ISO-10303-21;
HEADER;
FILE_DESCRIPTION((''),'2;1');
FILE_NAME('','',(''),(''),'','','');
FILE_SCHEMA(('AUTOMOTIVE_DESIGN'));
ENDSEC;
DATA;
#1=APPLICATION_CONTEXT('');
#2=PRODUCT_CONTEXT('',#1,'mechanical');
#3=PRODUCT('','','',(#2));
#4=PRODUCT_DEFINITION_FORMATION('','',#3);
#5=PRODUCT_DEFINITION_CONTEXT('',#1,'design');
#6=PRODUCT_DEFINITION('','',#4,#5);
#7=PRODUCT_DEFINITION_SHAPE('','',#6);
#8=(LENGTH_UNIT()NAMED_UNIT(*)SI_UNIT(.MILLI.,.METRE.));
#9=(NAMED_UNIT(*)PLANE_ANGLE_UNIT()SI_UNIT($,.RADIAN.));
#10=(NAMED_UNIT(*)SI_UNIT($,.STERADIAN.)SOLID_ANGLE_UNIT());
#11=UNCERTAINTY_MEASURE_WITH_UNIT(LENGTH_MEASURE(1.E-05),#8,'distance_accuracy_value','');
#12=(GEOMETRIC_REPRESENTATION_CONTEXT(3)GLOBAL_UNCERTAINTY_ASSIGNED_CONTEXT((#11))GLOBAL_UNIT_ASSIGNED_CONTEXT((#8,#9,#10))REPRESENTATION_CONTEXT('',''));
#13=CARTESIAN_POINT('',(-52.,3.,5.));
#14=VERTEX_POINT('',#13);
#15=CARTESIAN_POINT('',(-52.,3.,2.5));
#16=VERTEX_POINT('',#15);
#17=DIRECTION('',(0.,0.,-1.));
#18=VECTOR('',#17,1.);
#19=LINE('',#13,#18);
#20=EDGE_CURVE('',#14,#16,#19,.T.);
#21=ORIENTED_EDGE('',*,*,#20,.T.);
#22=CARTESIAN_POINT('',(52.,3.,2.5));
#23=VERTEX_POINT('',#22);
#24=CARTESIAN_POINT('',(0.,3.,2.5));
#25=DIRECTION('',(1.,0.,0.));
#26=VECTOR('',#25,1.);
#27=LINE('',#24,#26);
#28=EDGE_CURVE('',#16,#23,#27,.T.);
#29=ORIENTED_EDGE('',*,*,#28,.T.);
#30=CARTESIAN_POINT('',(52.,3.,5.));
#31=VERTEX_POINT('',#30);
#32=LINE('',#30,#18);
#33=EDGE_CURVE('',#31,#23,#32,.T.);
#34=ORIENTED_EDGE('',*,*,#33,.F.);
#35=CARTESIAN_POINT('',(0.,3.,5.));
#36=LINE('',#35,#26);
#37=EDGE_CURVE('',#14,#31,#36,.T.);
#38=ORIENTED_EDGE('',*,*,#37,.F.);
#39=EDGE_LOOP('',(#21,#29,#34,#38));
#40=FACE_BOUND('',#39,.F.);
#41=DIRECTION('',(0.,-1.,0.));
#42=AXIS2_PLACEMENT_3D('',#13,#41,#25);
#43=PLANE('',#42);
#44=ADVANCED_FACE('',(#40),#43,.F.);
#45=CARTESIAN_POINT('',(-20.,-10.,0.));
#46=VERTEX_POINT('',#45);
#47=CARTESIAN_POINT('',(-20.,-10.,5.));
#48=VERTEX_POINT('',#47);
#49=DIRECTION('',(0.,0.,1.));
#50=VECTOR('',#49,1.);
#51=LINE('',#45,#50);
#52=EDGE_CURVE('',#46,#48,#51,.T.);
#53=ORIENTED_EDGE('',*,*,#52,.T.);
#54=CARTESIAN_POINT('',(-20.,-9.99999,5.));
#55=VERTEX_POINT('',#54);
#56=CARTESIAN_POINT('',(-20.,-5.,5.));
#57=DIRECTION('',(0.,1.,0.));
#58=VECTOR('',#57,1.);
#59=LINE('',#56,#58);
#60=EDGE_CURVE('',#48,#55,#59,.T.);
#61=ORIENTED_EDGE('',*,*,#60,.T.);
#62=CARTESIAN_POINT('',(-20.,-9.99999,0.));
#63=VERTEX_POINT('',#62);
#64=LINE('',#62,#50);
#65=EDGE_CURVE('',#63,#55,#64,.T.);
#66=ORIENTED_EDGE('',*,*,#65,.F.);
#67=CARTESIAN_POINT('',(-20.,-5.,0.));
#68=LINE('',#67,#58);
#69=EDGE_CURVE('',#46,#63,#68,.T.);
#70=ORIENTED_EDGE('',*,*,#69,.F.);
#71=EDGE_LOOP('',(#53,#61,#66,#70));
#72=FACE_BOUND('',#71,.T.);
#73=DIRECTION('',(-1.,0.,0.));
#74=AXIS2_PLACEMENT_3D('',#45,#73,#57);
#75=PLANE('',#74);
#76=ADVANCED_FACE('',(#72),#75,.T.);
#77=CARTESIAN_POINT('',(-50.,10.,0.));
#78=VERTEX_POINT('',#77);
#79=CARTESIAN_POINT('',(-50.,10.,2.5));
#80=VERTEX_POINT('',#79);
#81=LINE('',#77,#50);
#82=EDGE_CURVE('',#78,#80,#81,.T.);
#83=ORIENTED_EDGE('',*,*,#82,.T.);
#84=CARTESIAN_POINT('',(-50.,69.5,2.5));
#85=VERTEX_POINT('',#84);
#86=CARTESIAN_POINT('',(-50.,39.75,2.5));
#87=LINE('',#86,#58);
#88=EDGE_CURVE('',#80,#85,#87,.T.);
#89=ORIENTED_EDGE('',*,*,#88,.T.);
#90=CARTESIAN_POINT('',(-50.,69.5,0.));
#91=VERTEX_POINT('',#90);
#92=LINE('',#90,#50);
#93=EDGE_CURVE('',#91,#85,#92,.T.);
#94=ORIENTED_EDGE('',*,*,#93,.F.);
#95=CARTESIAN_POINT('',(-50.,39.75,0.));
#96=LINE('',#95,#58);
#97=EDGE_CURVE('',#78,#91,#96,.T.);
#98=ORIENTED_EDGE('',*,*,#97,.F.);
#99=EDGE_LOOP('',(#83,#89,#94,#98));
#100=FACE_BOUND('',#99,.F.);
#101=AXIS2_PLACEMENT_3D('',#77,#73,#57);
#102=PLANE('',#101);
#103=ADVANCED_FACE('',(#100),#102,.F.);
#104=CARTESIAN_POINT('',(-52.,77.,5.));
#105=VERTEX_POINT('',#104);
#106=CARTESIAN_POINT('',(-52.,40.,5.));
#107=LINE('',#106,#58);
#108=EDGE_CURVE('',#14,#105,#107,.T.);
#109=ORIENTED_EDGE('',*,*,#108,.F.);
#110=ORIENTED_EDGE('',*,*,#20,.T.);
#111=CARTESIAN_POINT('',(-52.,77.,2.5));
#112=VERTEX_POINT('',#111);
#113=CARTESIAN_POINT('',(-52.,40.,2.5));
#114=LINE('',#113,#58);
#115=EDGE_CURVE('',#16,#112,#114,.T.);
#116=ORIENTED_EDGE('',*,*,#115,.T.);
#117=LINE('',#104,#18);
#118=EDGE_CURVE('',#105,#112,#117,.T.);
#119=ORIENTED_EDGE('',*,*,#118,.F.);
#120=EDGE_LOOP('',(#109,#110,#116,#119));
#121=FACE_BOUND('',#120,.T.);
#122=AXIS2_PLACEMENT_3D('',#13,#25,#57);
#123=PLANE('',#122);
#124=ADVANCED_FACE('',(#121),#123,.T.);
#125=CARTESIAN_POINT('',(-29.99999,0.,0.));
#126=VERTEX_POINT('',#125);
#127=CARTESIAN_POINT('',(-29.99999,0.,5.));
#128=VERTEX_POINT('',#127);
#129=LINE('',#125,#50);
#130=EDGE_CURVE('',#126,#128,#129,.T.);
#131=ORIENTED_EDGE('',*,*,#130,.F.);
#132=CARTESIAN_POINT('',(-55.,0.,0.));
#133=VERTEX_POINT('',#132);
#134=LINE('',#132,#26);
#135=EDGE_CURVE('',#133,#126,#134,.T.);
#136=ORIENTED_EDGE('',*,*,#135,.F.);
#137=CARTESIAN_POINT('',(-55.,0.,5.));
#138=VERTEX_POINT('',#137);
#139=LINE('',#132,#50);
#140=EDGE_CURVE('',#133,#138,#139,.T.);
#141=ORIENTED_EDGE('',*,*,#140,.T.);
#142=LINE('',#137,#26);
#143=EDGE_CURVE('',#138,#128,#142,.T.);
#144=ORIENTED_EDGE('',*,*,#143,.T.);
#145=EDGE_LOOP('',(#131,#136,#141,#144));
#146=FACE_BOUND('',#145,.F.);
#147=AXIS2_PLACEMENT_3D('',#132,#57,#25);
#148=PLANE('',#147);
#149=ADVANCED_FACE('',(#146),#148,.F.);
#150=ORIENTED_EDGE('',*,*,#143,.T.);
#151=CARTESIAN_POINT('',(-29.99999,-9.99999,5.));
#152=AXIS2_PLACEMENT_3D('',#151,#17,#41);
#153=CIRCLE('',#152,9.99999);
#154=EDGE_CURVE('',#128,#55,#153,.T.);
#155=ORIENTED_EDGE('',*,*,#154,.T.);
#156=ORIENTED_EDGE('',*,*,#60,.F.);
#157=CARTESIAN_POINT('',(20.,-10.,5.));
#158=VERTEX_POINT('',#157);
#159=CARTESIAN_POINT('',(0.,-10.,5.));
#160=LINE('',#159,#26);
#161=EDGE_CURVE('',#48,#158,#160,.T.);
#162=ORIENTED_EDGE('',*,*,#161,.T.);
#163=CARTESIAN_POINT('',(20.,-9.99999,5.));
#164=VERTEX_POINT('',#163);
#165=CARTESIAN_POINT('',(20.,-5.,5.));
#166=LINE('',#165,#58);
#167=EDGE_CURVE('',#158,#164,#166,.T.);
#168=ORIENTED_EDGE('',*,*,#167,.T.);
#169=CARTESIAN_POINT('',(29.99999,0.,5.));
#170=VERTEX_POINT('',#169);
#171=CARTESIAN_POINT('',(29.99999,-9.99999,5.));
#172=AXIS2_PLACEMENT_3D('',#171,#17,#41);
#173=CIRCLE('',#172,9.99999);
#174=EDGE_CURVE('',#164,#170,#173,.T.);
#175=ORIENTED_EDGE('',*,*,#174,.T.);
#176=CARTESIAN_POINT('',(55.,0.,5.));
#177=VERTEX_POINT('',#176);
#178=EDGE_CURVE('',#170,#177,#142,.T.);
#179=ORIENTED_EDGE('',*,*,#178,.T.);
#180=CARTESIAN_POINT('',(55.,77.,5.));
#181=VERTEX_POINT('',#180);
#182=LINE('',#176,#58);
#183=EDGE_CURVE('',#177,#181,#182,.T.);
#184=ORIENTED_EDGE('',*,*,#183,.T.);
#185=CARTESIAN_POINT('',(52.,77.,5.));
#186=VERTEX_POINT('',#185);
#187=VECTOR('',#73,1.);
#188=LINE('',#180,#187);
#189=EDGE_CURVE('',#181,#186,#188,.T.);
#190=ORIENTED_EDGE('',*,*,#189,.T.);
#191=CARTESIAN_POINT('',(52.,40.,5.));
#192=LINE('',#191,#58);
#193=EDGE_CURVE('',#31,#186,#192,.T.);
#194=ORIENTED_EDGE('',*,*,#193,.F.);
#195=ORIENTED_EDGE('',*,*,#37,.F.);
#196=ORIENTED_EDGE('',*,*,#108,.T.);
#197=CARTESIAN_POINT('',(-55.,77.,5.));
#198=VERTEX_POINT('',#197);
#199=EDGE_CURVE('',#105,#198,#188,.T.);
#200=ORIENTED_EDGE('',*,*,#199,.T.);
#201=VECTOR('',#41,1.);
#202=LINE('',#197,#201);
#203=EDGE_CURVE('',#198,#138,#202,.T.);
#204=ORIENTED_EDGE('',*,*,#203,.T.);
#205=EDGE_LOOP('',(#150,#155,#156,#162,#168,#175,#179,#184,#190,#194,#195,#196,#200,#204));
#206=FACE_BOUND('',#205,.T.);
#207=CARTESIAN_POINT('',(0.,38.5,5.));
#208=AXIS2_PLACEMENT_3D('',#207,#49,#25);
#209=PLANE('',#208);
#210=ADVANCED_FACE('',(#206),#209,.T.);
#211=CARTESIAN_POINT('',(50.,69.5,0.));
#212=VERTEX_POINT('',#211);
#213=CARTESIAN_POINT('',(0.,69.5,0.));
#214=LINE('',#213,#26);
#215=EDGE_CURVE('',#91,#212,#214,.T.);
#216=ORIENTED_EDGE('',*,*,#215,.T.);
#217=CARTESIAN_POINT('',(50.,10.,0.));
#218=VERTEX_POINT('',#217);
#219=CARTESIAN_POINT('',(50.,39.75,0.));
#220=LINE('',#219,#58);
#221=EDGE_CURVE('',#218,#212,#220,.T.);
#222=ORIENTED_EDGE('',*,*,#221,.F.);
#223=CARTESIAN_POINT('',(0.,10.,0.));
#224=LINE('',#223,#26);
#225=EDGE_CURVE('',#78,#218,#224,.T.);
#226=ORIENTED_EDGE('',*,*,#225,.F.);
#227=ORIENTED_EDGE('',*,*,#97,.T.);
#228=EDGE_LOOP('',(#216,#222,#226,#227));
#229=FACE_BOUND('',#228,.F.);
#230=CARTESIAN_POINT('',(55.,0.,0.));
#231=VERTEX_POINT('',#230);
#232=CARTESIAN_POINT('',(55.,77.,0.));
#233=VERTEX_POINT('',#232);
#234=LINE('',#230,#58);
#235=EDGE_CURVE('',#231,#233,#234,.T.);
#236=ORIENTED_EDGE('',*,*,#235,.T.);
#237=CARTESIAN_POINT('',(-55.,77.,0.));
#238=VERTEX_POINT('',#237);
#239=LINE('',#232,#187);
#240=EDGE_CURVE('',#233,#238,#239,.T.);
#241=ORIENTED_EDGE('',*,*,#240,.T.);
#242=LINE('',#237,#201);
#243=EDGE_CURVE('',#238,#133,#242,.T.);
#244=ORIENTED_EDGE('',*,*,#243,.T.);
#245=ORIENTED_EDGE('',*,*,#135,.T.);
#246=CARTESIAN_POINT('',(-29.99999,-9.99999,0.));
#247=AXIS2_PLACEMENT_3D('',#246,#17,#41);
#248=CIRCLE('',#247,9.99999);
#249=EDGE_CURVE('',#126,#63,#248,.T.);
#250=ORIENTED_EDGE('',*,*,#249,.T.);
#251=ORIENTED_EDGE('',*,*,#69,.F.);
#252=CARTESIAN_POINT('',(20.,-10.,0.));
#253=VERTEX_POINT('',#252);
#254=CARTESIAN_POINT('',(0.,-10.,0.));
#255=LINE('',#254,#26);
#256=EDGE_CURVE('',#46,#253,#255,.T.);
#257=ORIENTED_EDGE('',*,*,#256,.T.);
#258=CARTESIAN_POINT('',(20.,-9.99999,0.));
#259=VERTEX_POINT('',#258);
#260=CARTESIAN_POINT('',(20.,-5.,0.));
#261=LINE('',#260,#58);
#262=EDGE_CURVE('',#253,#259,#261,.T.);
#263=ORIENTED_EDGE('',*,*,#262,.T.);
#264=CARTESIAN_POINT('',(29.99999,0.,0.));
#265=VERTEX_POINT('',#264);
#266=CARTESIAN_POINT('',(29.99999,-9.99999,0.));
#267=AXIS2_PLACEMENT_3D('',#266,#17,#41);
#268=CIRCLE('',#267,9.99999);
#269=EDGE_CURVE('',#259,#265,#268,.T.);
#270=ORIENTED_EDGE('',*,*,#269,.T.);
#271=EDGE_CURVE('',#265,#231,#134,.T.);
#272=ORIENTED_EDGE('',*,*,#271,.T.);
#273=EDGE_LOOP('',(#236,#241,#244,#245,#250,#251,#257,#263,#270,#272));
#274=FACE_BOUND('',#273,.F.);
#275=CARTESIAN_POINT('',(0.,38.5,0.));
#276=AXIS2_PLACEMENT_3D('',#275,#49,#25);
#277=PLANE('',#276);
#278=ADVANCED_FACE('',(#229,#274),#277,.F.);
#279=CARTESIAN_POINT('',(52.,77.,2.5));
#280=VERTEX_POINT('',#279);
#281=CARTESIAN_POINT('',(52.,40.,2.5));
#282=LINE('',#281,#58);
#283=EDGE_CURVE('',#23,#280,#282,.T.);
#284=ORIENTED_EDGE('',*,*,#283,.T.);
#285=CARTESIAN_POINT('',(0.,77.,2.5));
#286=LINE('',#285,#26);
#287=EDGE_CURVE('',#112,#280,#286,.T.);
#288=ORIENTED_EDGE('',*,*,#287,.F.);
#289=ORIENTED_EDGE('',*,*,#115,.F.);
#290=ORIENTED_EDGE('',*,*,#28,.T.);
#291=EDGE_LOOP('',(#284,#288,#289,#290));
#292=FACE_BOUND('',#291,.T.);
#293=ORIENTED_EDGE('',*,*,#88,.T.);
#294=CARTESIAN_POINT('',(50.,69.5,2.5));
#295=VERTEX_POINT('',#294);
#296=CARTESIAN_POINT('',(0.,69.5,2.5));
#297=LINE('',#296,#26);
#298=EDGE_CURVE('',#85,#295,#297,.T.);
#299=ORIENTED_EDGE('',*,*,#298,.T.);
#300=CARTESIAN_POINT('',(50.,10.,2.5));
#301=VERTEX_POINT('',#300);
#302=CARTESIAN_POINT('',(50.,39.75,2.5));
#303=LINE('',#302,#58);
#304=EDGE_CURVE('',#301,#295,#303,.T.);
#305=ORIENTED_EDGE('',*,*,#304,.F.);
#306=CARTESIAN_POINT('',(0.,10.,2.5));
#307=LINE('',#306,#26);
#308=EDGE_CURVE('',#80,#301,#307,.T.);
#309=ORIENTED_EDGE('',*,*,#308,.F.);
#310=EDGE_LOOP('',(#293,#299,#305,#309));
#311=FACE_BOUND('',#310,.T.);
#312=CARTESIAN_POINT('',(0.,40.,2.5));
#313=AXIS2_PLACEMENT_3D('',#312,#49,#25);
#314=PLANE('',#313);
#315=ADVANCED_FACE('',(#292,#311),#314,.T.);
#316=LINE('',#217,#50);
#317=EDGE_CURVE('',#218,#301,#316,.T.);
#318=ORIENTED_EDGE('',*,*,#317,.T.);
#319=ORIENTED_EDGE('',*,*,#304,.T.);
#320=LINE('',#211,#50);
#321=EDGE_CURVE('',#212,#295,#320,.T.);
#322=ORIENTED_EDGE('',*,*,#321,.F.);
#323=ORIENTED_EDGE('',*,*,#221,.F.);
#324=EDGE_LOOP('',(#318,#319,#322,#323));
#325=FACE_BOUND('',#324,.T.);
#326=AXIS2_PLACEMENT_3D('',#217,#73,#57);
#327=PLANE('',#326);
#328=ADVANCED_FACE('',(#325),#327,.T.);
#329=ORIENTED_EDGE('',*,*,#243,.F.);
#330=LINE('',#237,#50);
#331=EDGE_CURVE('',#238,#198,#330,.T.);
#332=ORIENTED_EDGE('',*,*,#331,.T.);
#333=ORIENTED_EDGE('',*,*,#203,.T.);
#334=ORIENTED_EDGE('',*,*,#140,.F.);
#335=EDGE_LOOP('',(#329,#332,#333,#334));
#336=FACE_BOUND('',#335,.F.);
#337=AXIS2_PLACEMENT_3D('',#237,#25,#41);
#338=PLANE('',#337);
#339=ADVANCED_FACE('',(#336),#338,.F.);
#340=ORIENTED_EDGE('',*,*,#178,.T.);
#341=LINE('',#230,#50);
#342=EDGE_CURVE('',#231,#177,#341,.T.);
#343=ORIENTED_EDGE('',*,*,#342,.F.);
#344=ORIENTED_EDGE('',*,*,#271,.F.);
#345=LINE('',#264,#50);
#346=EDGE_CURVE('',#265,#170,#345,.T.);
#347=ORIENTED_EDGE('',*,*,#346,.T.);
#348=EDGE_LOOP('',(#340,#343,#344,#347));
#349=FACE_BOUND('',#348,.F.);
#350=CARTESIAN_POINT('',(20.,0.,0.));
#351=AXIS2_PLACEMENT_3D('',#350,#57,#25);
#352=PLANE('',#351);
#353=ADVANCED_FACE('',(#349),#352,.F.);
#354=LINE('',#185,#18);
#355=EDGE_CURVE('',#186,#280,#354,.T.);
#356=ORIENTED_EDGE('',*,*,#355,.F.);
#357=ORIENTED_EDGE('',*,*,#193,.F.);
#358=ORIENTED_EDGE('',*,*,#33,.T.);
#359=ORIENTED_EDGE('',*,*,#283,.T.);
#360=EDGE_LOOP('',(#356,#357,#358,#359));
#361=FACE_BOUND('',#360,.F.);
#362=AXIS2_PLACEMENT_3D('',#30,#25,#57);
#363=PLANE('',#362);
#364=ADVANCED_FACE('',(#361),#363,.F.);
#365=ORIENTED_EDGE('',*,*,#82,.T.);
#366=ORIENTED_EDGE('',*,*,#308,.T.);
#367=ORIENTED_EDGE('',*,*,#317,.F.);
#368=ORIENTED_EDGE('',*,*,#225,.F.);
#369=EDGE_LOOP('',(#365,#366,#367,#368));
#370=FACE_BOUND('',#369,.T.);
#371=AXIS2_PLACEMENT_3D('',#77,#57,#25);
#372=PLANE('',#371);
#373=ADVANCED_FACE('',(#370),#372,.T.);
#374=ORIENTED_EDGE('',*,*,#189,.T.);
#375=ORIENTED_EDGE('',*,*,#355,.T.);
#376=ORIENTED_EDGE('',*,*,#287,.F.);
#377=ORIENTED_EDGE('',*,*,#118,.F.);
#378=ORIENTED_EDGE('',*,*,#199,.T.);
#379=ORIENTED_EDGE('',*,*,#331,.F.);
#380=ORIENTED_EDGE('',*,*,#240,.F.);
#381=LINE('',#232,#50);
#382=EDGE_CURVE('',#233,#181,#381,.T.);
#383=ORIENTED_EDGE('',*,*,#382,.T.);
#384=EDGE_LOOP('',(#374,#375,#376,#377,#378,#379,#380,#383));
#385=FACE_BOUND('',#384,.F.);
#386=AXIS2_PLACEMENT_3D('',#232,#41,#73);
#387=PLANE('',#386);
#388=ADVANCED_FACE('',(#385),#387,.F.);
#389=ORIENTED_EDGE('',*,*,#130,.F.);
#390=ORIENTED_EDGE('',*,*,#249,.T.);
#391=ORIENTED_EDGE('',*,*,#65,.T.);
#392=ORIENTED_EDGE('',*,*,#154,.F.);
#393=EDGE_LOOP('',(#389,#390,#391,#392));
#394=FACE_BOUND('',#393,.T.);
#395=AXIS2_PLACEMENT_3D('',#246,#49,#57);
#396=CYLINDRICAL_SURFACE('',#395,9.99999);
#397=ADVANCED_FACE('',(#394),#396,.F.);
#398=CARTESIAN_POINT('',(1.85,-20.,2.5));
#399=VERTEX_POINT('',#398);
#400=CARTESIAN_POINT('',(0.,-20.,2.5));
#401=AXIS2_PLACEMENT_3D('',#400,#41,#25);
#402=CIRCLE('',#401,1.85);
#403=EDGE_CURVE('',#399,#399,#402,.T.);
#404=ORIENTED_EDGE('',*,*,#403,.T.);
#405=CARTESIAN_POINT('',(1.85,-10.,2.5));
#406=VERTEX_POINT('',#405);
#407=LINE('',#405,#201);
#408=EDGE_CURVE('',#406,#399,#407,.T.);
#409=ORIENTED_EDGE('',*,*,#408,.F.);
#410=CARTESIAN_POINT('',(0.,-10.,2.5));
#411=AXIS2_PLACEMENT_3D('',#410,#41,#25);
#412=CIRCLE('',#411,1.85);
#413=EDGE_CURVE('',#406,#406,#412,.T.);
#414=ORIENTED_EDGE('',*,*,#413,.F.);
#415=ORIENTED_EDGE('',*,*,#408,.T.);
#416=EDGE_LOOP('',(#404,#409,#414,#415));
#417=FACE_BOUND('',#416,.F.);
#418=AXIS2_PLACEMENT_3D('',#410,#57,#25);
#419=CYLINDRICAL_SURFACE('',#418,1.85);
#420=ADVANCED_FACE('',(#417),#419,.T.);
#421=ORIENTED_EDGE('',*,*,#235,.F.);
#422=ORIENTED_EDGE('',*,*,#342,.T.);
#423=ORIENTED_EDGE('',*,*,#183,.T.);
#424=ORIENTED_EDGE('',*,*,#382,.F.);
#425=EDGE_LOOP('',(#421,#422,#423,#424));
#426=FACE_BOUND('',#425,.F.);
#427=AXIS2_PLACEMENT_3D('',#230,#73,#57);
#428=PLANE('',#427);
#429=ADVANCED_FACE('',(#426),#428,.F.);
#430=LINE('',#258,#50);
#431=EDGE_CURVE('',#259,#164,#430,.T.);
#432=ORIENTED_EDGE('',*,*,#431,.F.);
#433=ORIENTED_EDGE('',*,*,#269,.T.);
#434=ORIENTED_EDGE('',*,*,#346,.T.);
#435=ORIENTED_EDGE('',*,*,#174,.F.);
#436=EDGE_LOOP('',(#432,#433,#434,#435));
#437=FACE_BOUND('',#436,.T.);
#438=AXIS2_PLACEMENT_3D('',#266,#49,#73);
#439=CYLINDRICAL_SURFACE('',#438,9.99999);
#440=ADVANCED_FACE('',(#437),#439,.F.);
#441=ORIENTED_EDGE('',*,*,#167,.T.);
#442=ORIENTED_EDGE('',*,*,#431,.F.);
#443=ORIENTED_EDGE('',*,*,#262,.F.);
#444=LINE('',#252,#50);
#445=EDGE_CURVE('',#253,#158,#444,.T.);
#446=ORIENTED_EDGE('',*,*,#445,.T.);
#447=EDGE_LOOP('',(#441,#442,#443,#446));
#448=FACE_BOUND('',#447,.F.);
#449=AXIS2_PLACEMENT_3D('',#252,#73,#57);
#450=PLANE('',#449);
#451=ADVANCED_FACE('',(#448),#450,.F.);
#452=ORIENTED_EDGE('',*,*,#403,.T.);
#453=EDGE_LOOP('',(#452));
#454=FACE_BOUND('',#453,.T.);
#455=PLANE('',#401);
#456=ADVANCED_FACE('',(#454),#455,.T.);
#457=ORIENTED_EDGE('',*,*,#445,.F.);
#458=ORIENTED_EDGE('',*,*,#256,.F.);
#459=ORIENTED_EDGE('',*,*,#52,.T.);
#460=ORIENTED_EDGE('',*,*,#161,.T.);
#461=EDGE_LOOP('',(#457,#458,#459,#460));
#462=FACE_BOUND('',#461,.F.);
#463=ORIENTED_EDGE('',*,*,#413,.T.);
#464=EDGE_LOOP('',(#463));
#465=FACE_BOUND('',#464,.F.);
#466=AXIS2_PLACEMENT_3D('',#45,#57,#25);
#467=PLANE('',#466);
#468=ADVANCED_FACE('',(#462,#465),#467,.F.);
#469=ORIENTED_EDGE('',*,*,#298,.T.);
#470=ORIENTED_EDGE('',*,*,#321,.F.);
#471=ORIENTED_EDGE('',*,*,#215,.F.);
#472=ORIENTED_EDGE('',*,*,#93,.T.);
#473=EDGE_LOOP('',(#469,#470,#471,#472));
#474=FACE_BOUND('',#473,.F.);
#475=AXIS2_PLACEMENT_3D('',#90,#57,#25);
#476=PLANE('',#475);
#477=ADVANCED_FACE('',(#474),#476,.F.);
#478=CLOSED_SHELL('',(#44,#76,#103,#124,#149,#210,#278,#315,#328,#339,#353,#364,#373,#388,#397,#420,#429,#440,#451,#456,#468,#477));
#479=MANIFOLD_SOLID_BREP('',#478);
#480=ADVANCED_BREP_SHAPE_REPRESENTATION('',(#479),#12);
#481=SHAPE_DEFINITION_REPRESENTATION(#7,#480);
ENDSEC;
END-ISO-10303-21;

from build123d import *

# Parameters (mm, degrees)
F0_W     = 100.0000001118
F0_H     = 59.5
F0_W_2   = 40
F0_H_2   = 10
F1_DEPTH = 5
F2_W     = 104
F2_H     = 74
F2_W_2   = 100.0000001118
F2_H_2   = 59.5
F3_DEPTH = 2.5
F4_R     = 1.85
F5_DEPTH = 10
F6_R     = 9.99999


# Not quite as in the source:
# - a fillet or chamfer is up to 0.001 mm smaller than in the source, because OpenCascade refuses the exact size


with BuildPart() as f1:
    # F0 (on Top) → F1 (new body)
    with BuildSketch(Plane.XY):
        Polygon((-55, 77), (-55, 0), (-20, 0), (20, 0), (55, 0), (55, 77), align=None)
        with Locations((5.59e-08, 39.75)):
            Rectangle(F0_W, F0_H, mode=Mode.SUBTRACT)
        with Locations((0, -5)):
            Rectangle(F0_W_2, F0_H_2)
    extrude(amount=F1_DEPTH)

    # F2 (on face) → F3 (cut)
    with BuildSketch(Plane.XY.offset(5)):
        with Locations((0, 40)):
            Rectangle(F2_W, F2_H)
        with Locations((5.59e-08, 39.75)):
            Rectangle(F2_W_2, F2_H_2, mode=Mode.SUBTRACT)
    extrude(amount=-F3_DEPTH, mode=Mode.SUBTRACT)

    # F4 (on face) → F5 (join)
    with BuildSketch(Plane.XZ.offset(10)):
        with Locations((0, 2.5)):
            Circle(F4_R)
    extrude(amount=F5_DEPTH)

    # F6 (radius 10 in the source; OpenCascade refuses exactly that, so slightly less here)
    f6_edges = [f1.edges().sort_by_distance(p)[0] for p in [
        (20, 0, 2.5),
        (-20, 0, 2.5),
    ]]
    fillet(f6_edges, radius=F6_R)


solid = f1.part
